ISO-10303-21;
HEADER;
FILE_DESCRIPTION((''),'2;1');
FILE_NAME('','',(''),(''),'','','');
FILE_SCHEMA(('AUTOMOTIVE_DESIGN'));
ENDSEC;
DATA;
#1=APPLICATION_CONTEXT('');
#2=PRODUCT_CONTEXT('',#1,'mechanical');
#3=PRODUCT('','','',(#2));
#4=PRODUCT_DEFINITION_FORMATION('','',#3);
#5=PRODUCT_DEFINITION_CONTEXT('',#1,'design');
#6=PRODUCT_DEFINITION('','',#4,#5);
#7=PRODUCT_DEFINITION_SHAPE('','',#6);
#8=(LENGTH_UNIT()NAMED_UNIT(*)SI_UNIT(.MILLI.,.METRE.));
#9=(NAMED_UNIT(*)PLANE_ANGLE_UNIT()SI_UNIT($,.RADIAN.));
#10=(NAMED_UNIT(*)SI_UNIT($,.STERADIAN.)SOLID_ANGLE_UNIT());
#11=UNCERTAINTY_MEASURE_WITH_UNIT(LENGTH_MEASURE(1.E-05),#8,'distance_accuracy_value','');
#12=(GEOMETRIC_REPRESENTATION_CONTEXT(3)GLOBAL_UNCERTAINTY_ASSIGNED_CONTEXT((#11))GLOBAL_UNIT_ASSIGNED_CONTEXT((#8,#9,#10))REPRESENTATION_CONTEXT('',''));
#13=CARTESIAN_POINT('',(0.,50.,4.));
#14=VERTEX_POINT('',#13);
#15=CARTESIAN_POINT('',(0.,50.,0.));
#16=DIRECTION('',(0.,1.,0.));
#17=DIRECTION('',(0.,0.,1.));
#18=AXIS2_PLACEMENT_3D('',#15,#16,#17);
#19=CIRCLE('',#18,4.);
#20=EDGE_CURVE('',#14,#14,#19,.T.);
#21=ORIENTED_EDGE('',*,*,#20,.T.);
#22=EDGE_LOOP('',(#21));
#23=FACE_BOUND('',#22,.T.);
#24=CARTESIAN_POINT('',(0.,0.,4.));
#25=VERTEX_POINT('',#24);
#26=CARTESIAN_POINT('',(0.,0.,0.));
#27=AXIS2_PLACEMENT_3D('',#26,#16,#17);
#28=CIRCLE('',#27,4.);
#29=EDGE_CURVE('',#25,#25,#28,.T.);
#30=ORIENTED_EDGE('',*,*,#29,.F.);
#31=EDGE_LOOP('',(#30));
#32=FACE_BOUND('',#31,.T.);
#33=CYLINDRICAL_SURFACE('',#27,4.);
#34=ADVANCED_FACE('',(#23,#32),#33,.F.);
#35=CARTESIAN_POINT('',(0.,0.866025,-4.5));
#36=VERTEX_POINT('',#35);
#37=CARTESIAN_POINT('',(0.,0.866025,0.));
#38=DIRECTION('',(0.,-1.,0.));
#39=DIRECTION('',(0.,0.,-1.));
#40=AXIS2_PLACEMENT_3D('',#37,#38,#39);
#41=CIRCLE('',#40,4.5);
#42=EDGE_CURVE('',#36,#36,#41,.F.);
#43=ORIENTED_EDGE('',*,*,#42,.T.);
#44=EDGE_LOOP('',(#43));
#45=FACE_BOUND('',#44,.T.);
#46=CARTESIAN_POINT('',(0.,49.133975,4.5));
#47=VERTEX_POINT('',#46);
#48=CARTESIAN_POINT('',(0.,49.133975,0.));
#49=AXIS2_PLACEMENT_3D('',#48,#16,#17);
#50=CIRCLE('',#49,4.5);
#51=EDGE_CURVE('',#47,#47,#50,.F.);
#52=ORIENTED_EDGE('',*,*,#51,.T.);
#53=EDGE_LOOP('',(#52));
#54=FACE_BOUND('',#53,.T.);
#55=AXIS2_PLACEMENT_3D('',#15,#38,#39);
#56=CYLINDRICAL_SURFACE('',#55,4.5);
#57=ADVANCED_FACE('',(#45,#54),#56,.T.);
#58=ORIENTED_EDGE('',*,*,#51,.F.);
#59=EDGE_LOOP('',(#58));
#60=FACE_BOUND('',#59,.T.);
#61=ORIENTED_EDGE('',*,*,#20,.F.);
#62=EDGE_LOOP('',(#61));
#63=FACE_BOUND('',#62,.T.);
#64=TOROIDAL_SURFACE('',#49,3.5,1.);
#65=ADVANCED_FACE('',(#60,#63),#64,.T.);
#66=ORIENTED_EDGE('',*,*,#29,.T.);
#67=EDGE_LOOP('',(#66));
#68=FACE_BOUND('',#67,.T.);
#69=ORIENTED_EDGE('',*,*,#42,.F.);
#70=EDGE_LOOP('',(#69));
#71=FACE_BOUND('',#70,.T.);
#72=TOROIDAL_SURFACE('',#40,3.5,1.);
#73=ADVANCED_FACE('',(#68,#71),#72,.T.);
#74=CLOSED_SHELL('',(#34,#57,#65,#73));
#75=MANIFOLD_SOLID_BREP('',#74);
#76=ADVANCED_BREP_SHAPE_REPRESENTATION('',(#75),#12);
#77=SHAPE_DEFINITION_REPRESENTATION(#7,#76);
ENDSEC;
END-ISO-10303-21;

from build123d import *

# Parameters (mm, degrees)
SKETCH1_R           = 4.5
BOSS_EXTRUDE1_DEPTH = 50
SKETCH2_R           = 4
CUT_EXTRUDE1_DEPTH  = 50
FILLET2_R           = 1


with BuildPart() as part:
    # Sketch1 → Boss-Extrude1 (new body)
    with BuildSketch(Plane(origin=(0, 0, 0), x_dir=(1, 0, 0), z_dir=(0, 1, 0))):
        with Locations(Location((0, 0, 0), (0, 0, 270))):
            Circle(SKETCH1_R)
    extrude(amount=BOSS_EXTRUDE1_DEPTH)

    # Sketch2 → Cut-Extrude1 (cut)
    with BuildSketch(Plane(origin=(0, 50, 0), x_dir=(1, 0, 0), z_dir=(0, 1, 0))):
        with Locations(Location((0, 0, 0), (0, 0, 270))):
            Circle(SKETCH2_R)
    extrude(amount=-CUT_EXTRUDE1_DEPTH, mode=Mode.SUBTRACT)

    # Fillet2
    # the kernel refuses this fillet: 1 mm, written as the material it takes off along each edge
    with BuildSketch(Plane(origin=(0, 0, 0), x_dir=(0, 0, 1), z_dir=(-1, 0, 0))) as fillet2_piece_1:
        with BuildLine():
            CenterArc((3.5, 0.866025404), FILLET2_R, 300, 60)
            Line((4, 0), (4.01, -0.017320508))
            ThreePointArc((4.01, -0.017320508), (4.25, -0.02), (4.5, -0.02))
            Line((4.5, -0.02), (4.52, 0))
            Line((4.52, 0), (4.52, 0.866025404))
            Line((4.52, 0.866025404), (4.5, 0.866025404))
        make_face()
    revolve(axis=Axis((0, 0, 0), (0, 1, 0)), mode=Mode.SUBTRACT)
    with BuildSketch(Plane(origin=(0, 50, 0), x_dir=(0, 0, 1), z_dir=(-1, 0, 0))) as fillet2_piece_2:
        with BuildLine():
            CenterArc((3.5, -0.866025404), FILLET2_R, 0, 60)
            Line((4, 0), (4.01, 0.017320508))
            ThreePointArc((4.01, 0.017320508), (4.25, 0.02), (4.5, 0.02))
            Line((4.5, 0.02), (4.52, 0))
            Line((4.52, 0), (4.52, -0.866025404))
            Line((4.52, -0.866025404), (4.5, -0.866025404))
        make_face()
    revolve(axis=Axis((0, 50, 0), (0, 1, 0)), mode=Mode.SUBTRACT)


solid = part.part
